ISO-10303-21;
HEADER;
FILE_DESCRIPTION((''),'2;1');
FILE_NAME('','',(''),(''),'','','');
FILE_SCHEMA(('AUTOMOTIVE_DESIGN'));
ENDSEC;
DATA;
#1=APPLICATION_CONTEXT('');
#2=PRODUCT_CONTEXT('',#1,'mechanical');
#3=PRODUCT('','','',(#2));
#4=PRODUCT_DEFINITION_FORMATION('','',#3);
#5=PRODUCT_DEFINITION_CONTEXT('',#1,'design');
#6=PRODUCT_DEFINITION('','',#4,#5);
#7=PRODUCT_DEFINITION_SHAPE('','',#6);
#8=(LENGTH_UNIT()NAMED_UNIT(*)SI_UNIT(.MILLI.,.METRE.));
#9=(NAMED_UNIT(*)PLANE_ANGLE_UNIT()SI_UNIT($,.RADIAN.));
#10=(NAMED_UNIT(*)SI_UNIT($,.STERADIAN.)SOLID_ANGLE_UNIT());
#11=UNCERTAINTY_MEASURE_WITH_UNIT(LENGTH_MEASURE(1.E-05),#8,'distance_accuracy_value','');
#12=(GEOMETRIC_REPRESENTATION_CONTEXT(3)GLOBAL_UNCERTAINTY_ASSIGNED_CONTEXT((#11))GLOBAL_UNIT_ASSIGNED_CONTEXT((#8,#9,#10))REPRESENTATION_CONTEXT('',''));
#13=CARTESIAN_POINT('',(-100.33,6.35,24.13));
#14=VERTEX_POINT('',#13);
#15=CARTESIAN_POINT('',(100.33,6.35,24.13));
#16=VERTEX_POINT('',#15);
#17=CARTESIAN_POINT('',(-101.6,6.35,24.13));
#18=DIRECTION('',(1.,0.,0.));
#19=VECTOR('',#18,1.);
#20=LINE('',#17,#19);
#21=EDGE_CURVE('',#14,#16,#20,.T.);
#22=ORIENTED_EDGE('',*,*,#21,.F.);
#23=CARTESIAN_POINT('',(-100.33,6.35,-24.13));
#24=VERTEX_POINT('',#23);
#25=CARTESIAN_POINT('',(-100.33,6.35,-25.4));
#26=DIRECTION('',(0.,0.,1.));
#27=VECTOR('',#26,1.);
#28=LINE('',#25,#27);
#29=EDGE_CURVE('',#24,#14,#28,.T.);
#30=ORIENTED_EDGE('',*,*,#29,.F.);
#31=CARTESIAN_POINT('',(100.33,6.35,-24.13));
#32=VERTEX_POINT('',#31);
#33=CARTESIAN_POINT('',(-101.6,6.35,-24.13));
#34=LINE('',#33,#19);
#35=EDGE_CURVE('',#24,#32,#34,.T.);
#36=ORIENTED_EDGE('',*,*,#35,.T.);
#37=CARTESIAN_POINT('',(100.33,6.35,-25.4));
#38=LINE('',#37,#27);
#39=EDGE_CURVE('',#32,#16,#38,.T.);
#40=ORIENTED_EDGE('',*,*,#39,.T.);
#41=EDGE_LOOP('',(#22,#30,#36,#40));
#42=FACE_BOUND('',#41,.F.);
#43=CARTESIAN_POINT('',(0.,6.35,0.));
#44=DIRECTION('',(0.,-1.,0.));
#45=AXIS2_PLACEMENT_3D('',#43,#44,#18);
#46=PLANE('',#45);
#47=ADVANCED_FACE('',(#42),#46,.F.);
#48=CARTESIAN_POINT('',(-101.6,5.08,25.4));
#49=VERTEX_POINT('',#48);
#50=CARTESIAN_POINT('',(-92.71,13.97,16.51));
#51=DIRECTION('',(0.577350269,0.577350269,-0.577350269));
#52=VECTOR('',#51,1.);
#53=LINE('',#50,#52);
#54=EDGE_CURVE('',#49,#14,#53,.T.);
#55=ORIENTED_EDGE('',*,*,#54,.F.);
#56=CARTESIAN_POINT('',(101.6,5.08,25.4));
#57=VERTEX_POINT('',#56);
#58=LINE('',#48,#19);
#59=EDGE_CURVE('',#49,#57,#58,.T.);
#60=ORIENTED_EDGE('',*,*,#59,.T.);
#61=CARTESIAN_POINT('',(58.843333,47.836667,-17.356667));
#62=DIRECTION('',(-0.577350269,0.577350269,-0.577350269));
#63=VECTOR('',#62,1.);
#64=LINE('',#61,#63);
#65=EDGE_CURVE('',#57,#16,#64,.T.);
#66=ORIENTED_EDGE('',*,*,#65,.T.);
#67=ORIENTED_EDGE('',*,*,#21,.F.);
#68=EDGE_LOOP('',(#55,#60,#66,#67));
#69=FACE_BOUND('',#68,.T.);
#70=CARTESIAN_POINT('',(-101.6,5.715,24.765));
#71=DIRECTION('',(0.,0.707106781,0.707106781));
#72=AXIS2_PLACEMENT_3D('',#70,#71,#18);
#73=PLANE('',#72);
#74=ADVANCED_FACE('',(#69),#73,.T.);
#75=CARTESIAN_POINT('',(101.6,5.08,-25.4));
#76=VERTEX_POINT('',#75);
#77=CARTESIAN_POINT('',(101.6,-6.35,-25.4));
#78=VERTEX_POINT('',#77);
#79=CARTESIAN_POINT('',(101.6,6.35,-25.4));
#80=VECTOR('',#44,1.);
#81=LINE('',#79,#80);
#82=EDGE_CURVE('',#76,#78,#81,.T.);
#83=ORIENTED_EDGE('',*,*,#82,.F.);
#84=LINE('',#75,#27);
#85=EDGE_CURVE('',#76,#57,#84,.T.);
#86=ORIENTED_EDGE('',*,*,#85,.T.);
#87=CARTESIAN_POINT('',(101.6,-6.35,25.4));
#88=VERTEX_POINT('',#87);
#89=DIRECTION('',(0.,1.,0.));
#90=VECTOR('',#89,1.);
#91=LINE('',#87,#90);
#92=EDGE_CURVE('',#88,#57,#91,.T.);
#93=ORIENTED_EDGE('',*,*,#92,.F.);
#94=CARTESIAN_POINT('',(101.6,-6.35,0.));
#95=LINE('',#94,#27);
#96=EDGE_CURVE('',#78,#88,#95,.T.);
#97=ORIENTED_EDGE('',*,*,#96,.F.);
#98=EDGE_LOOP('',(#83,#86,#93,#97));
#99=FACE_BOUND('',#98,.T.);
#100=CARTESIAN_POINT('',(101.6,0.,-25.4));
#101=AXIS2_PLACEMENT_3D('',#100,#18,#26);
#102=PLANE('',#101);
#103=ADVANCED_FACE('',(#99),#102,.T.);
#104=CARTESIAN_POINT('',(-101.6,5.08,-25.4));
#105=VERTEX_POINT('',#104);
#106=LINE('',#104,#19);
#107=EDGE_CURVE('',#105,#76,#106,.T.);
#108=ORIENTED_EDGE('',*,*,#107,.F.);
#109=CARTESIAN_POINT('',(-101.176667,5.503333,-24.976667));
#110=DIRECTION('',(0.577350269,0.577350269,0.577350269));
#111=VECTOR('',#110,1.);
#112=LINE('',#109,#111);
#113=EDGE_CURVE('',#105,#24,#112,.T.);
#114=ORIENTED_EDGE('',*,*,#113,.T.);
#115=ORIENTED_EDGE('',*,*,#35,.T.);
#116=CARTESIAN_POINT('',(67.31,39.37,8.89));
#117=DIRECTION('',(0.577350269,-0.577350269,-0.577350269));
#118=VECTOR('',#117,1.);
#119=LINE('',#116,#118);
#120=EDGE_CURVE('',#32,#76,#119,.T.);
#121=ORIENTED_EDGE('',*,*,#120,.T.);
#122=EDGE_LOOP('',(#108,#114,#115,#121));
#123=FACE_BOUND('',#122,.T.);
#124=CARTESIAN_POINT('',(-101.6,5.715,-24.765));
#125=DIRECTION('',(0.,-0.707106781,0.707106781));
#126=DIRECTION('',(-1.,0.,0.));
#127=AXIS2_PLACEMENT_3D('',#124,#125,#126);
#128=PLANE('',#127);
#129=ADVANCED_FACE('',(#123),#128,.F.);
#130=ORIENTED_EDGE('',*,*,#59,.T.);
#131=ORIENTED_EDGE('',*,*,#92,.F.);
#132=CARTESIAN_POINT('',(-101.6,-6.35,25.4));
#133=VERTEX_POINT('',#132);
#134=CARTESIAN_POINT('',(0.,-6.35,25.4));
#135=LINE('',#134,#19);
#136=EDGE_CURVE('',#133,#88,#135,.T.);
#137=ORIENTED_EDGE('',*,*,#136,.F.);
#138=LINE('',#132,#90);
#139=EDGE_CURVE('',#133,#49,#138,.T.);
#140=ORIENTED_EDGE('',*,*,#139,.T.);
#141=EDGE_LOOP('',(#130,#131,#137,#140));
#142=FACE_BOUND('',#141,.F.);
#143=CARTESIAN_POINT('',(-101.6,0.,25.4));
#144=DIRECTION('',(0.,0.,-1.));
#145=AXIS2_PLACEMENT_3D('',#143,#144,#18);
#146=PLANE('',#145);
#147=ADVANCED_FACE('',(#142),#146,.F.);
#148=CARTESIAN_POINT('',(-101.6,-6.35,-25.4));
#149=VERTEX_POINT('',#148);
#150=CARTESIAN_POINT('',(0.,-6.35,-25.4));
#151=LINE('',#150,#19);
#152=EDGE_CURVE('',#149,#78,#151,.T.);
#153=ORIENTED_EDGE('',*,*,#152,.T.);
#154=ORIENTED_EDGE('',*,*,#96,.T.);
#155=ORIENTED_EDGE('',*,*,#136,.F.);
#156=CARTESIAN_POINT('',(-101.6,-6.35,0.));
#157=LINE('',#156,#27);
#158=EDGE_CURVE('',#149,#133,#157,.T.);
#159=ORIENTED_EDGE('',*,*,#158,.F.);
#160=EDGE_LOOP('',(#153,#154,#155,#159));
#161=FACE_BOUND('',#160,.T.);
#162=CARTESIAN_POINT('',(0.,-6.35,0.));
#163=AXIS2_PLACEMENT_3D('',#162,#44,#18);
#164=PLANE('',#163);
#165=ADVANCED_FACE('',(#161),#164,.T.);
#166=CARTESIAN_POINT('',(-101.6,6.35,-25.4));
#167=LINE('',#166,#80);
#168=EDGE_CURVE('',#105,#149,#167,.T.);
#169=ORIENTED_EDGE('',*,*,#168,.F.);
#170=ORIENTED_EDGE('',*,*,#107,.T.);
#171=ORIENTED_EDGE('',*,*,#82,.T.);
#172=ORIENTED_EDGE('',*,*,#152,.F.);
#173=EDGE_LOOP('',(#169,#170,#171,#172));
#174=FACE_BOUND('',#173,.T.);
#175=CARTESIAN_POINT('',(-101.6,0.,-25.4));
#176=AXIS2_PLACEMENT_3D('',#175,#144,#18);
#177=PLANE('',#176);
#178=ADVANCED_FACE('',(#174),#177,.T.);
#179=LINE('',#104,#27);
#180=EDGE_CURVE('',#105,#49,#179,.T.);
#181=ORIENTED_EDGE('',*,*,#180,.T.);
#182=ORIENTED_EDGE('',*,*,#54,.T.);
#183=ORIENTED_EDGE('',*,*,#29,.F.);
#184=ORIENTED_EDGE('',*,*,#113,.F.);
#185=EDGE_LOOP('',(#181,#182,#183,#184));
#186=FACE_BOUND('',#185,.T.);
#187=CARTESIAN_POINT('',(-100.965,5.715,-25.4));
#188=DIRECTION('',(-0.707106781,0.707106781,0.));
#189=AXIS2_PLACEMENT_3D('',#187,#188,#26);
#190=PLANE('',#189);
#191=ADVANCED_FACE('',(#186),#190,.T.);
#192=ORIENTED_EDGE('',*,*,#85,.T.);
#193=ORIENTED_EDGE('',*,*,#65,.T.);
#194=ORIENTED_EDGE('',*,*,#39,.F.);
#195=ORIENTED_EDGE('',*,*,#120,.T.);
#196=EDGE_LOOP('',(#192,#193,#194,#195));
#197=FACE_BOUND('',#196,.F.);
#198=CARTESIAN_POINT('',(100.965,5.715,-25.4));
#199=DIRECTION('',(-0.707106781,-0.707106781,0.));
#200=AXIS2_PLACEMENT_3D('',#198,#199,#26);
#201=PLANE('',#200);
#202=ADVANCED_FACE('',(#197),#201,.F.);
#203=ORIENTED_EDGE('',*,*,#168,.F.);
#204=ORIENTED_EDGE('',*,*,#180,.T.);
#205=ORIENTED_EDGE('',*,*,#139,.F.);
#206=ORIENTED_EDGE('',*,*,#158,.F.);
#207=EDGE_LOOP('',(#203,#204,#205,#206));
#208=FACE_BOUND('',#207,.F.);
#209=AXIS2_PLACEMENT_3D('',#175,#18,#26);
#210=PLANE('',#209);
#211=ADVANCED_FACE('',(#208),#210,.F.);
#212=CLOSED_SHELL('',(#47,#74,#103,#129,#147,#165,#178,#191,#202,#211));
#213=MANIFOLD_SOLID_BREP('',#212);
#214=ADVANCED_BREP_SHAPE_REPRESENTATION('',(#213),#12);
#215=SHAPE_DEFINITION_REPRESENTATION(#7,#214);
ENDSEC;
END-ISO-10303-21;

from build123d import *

# Parameters (mm, degrees)
F0_W     = 203.2
F0_H     = 50.8
F1_DEPTH = 6.35
F4_SIZE  = 1.27


# Not quite as in the source:
# - the program builds the solid bodies; features that only make, move or delete a surface that nothing else refers to are left out


with BuildPart() as f1:
    # F0 (on Front) → F1 (new body, symmetric)
    with BuildSketch(Plane.XZ):
        Rectangle(F0_W, F0_H)
    extrude(amount=F1_DEPTH, both=True)

    # F4
    f4_edges = [f1.edges().sort_by_distance(p)[0] for p in [
        (-101.6, 6.35, 0),
        (0, 6.35, -25.4),
        (0, 6.35, 25.4),
        (101.6, 6.35, 0),
    ]]
    chamfer(f4_edges, length=F4_SIZE)


solid = f1.part
